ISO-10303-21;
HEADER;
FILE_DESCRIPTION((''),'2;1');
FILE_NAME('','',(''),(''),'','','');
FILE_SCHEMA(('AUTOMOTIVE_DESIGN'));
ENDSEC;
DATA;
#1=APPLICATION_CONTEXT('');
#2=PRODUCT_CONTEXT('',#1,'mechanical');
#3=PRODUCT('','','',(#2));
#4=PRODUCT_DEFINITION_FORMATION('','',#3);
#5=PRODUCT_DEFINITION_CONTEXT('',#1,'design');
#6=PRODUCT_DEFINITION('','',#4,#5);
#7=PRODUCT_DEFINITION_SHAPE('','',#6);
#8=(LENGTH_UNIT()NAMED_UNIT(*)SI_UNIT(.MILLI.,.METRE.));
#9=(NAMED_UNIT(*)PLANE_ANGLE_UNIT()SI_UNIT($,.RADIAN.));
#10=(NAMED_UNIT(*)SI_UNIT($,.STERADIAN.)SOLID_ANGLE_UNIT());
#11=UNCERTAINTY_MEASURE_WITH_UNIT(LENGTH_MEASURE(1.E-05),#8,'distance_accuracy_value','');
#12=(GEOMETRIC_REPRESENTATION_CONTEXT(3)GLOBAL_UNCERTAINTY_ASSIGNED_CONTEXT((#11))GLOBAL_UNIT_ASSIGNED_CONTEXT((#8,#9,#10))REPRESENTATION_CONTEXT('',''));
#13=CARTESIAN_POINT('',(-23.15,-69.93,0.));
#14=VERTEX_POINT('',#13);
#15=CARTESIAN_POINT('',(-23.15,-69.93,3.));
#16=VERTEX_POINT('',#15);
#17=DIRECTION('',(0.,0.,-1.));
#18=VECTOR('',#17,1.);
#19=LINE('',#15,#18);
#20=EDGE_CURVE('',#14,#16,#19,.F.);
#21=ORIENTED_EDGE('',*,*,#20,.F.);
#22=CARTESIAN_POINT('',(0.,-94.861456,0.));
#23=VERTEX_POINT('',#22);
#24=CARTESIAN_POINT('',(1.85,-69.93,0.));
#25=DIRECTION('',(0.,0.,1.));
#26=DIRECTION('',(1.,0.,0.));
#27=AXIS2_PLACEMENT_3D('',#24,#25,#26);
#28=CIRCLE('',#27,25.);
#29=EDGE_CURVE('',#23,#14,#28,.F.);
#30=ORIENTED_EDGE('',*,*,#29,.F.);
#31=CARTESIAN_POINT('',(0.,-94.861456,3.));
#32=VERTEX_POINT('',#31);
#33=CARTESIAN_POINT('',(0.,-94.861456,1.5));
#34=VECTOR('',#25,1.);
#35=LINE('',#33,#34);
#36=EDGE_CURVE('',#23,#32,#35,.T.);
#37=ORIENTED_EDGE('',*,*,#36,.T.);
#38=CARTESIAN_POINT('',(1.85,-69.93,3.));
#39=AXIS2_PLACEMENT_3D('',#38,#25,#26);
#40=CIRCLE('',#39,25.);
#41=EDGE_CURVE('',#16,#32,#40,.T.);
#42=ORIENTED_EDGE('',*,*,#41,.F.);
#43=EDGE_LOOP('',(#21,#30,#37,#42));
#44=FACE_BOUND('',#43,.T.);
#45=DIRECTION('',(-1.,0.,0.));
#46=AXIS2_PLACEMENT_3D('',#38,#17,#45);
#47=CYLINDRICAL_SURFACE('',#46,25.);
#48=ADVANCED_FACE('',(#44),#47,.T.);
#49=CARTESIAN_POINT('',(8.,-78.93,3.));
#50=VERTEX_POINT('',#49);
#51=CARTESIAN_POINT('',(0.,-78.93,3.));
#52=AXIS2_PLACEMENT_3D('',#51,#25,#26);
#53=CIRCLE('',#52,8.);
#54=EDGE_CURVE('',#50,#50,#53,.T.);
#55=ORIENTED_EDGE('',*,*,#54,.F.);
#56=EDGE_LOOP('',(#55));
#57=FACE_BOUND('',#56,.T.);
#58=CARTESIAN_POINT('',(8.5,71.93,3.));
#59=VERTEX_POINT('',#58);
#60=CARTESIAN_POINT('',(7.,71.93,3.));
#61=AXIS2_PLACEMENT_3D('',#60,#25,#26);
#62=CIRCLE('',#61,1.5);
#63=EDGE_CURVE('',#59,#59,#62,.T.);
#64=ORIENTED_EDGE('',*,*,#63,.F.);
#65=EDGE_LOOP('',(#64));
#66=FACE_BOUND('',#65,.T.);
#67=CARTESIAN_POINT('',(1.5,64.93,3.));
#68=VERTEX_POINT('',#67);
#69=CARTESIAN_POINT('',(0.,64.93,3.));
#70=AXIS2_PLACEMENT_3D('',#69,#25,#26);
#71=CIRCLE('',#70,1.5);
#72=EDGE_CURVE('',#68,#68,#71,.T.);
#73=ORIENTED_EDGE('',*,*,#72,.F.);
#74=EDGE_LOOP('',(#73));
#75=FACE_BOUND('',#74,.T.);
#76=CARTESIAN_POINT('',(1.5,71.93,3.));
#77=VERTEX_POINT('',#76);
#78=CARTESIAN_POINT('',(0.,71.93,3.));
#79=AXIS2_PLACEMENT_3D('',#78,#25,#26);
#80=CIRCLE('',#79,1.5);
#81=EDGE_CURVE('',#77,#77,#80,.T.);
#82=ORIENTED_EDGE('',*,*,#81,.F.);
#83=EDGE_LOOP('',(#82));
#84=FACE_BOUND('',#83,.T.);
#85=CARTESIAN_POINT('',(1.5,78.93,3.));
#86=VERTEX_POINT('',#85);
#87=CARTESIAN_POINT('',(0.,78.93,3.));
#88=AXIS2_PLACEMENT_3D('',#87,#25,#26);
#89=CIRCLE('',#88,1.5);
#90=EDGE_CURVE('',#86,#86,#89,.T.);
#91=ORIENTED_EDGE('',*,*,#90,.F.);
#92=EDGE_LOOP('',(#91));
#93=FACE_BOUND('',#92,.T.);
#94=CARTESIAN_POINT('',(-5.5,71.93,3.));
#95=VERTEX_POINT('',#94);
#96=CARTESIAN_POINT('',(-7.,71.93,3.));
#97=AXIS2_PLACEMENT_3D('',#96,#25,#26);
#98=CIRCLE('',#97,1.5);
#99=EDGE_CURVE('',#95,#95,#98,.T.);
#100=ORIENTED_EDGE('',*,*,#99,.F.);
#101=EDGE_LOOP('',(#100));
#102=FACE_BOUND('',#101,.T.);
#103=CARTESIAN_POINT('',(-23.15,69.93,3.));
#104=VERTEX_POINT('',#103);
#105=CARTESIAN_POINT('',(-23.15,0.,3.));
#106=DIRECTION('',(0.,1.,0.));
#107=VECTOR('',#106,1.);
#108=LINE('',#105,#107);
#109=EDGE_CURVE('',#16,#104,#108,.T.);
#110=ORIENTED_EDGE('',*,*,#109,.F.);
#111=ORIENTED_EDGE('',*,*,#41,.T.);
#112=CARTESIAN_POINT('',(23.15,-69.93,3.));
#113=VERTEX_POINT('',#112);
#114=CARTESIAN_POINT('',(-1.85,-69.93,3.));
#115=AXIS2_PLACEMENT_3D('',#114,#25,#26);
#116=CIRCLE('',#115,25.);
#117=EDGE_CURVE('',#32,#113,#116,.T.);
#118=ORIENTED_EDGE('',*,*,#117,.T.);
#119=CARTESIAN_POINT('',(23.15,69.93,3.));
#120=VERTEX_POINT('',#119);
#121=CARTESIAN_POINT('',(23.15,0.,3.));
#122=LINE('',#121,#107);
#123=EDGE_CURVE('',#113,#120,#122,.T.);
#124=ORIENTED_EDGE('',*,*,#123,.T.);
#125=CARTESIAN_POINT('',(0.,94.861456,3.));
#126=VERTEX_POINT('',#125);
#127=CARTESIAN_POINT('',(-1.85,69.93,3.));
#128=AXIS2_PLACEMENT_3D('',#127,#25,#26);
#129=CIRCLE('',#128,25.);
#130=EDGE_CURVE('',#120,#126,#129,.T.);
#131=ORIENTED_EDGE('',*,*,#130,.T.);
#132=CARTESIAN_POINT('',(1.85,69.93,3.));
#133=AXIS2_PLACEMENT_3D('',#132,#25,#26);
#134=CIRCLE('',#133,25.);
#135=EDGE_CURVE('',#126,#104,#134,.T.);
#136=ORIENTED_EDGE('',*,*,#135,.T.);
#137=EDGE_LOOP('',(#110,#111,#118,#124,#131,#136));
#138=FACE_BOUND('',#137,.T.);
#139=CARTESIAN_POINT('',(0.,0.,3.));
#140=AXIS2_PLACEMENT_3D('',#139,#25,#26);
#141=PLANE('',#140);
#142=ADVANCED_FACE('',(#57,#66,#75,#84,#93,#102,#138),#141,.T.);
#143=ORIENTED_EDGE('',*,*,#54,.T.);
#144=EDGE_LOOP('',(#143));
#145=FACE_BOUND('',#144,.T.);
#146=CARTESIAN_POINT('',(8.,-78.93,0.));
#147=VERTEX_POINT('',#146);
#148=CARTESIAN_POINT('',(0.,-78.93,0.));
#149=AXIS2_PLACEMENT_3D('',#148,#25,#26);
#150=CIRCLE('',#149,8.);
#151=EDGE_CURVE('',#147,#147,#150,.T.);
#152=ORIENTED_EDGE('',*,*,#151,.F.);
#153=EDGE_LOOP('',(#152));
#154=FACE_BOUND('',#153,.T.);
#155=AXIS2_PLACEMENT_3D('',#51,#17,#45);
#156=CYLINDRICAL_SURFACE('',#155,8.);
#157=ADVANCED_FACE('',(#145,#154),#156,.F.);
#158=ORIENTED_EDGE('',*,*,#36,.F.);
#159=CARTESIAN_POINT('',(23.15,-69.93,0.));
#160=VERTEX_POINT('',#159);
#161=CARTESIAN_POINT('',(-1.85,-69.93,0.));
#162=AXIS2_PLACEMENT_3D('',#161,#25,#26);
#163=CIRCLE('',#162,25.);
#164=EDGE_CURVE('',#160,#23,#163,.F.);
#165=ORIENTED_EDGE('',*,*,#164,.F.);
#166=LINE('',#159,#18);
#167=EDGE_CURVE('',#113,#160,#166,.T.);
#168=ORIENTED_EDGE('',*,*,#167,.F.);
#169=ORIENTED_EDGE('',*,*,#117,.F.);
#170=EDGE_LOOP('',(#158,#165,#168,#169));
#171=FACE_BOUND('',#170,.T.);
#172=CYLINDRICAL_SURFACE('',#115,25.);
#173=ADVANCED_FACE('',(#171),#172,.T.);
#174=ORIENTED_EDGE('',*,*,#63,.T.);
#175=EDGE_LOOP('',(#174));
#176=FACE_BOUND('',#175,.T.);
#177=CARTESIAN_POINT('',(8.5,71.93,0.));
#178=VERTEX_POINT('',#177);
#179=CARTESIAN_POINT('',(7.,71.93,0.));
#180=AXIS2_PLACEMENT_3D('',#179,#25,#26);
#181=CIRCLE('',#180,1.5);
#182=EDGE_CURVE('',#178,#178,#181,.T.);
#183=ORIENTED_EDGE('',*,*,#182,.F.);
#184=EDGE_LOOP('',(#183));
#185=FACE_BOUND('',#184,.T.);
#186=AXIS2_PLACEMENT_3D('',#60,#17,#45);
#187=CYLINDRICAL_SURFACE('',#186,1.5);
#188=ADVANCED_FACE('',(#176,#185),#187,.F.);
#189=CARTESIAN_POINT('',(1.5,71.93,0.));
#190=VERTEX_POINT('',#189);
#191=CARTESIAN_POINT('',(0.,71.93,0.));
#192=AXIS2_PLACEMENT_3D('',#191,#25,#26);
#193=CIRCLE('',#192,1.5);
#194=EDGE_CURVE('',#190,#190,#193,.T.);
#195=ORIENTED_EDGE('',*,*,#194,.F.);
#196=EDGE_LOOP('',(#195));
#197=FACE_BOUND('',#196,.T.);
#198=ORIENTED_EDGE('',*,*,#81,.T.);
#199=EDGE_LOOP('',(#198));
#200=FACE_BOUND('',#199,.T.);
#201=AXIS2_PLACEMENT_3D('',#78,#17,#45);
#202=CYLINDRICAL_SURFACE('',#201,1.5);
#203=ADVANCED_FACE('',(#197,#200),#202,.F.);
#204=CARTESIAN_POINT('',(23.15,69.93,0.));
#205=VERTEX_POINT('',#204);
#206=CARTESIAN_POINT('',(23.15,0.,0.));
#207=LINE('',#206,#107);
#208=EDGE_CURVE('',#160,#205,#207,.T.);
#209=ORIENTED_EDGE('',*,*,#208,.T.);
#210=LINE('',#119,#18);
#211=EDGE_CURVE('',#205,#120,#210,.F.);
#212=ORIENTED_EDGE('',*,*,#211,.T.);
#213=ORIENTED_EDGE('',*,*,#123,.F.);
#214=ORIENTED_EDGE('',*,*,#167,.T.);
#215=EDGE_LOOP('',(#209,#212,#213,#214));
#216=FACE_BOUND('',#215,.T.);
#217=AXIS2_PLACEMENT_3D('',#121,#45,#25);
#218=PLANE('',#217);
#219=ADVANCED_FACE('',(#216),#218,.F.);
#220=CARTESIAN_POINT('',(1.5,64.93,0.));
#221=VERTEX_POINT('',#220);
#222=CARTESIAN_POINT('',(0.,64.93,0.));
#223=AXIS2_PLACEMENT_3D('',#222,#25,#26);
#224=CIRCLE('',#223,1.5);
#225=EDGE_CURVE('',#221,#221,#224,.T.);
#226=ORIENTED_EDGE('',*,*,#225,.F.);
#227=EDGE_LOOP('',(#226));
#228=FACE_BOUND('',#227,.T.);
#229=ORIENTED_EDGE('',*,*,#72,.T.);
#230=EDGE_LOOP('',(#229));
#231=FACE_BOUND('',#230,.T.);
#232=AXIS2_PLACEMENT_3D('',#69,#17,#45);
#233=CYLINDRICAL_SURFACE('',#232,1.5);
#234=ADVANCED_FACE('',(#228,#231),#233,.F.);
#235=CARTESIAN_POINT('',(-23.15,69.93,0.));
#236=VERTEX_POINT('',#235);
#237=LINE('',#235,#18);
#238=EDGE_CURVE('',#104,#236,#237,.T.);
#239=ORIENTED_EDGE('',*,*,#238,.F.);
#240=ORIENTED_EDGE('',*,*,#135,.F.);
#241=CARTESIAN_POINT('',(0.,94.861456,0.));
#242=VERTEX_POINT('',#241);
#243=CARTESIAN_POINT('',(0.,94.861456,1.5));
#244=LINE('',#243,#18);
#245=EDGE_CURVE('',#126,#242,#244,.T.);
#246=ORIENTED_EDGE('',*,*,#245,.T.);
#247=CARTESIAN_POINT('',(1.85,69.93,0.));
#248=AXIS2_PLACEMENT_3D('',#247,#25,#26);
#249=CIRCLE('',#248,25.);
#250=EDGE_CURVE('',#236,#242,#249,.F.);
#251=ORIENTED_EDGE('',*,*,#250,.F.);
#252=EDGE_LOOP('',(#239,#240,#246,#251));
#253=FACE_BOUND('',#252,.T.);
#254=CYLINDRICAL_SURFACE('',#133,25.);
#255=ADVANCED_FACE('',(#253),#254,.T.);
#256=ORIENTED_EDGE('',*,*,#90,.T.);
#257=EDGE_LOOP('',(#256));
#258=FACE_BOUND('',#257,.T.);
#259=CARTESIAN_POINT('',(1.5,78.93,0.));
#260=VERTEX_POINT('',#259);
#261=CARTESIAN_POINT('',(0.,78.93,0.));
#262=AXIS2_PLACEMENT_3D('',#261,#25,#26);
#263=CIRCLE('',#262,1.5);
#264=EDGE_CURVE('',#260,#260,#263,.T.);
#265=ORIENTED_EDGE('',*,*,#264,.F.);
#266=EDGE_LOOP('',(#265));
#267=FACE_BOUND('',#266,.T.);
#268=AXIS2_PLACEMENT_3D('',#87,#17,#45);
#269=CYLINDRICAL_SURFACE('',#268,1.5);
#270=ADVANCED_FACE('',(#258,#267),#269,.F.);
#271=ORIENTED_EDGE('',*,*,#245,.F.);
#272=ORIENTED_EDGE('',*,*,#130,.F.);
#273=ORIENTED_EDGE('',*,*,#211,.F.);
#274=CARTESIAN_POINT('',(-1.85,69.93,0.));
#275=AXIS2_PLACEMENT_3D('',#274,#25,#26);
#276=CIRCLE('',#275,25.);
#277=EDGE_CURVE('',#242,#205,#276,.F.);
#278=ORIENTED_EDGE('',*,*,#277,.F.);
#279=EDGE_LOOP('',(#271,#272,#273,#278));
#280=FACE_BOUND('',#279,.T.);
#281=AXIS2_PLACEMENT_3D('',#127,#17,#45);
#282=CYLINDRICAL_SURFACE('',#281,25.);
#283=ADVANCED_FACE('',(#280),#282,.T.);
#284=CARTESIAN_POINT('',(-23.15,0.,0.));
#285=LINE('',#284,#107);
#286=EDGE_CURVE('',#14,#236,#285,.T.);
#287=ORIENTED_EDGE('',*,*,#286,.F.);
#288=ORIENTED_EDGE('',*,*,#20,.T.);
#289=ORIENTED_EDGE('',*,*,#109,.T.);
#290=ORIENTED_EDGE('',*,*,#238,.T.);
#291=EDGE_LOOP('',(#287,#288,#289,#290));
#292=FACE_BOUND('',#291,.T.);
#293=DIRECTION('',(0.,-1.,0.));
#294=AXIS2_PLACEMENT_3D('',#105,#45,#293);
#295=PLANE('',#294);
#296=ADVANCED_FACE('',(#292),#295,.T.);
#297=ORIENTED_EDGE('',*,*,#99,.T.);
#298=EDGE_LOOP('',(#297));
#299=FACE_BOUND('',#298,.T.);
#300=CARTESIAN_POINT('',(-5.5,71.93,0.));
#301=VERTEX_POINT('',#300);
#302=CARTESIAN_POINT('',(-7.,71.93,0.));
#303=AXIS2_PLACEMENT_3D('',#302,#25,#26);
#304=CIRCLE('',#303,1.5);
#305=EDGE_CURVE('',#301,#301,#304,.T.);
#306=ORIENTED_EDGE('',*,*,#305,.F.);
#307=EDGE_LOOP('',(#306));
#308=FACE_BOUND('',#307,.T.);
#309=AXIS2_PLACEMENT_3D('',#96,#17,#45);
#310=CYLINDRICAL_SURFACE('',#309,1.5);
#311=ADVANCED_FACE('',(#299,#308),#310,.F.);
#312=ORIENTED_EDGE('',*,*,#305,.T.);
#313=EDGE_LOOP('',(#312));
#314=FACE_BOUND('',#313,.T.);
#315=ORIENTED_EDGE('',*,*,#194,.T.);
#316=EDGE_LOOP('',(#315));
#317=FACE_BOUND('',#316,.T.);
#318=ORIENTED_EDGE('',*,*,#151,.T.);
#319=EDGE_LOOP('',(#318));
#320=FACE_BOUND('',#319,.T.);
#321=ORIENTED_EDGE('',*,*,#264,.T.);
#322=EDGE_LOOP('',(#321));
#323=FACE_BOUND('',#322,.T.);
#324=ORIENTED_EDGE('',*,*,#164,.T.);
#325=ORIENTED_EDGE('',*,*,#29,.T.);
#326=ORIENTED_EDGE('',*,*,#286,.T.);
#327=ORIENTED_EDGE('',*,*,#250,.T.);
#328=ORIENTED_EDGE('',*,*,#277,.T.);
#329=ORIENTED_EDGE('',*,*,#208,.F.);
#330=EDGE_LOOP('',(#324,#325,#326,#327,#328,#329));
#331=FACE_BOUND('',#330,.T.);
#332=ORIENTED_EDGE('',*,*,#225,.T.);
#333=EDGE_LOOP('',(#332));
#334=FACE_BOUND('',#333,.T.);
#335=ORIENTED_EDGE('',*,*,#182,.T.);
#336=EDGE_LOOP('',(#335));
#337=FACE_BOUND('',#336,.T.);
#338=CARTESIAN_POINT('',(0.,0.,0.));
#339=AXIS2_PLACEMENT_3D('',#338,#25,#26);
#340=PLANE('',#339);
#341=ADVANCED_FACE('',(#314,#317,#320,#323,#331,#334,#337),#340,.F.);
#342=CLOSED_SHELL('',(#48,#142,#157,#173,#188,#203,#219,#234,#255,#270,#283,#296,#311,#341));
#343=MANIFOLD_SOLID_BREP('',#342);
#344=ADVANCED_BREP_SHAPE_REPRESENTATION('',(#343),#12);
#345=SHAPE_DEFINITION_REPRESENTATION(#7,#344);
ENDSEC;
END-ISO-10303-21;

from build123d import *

# Parameters (mm, degrees)
SKETCH1_W           = 46.3
SKETCH1_H           = 189.86
SKETCH1_R           = 10.5
SKETCH1_R_2         = 8
SKETCH1_R_3         = 1.5
BOSS_EXTRUDE1_DEPTH = 3
FILLET1_R           = 25


with BuildPart() as part:
    # Sketch1 → Boss-Extrude1 (new body)
    # profile 1 of 2: a face of its own
    with BuildSketch(Plane.XY):
        Rectangle(SKETCH1_W, SKETCH1_H)
        with Locations((0, 71.93)):
            Circle(SKETCH1_R, mode=Mode.SUBTRACT)
        with Locations((0, -78.93)):
            Circle(SKETCH1_R_2, mode=Mode.SUBTRACT)
    # profile 2 of 2: a face of its own
    with BuildSketch(Plane.XY):
        with Locations((0, 71.93)):
            Circle(SKETCH1_R)
        with Locations((0, 78.93)):
            Circle(SKETCH1_R_3, mode=Mode.SUBTRACT)
        with Locations((7, 71.93)):
            Circle(SKETCH1_R_3, mode=Mode.SUBTRACT)
        with Locations((0, 64.93)):
            Circle(SKETCH1_R_3, mode=Mode.SUBTRACT)
        with Locations((-7, 71.93)):
            Circle(SKETCH1_R_3, mode=Mode.SUBTRACT)
        with Locations((0, 71.93)):
            Circle(SKETCH1_R_3, mode=Mode.SUBTRACT)
    extrude(amount=BOSS_EXTRUDE1_DEPTH)

    # Fillet1
    # the kernel refuses this fillet: 25 mm, written as the material it takes off along each edge
    with BuildSketch(Plane(origin=(-23.15, -94.93, -62.5), x_dir=(0, 1, 0), z_dir=(0, 0, 1)), Plane(origin=(23.15, -94.93, -62.5), x_dir=(-1, 0, 0), z_dir=(0, 0, 1))) as fillet1_piece_1:
        with BuildLine():
            CenterArc((FILLET1_R, -FILLET1_R), FILLET1_R, 90, 90)
            Line((0, -FILLET1_R), (0, 0))
            Line((0, 0), (FILLET1_R, 0))
        make_face()
    extrude(amount=128, mode=Mode.SUBTRACT)
    with BuildSketch(Plane(origin=(-23.15, 94.93, -62.5), x_dir=(0, -1, 0), z_dir=(0, 0, 1)), Plane(origin=(23.15, 94.93, -62.5), x_dir=(-1, 0, 0), z_dir=(0, 0, 1))) as fillet1_piece_2:
        with BuildLine():
            CenterArc((FILLET1_R, FILLET1_R), FILLET1_R, 180, 90)
            Line((0, FILLET1_R), (0, 0))
            Line((0, 0), (FILLET1_R, 0))
        make_face()
    extrude(amount=128, mode=Mode.SUBTRACT)


solid = part.part
